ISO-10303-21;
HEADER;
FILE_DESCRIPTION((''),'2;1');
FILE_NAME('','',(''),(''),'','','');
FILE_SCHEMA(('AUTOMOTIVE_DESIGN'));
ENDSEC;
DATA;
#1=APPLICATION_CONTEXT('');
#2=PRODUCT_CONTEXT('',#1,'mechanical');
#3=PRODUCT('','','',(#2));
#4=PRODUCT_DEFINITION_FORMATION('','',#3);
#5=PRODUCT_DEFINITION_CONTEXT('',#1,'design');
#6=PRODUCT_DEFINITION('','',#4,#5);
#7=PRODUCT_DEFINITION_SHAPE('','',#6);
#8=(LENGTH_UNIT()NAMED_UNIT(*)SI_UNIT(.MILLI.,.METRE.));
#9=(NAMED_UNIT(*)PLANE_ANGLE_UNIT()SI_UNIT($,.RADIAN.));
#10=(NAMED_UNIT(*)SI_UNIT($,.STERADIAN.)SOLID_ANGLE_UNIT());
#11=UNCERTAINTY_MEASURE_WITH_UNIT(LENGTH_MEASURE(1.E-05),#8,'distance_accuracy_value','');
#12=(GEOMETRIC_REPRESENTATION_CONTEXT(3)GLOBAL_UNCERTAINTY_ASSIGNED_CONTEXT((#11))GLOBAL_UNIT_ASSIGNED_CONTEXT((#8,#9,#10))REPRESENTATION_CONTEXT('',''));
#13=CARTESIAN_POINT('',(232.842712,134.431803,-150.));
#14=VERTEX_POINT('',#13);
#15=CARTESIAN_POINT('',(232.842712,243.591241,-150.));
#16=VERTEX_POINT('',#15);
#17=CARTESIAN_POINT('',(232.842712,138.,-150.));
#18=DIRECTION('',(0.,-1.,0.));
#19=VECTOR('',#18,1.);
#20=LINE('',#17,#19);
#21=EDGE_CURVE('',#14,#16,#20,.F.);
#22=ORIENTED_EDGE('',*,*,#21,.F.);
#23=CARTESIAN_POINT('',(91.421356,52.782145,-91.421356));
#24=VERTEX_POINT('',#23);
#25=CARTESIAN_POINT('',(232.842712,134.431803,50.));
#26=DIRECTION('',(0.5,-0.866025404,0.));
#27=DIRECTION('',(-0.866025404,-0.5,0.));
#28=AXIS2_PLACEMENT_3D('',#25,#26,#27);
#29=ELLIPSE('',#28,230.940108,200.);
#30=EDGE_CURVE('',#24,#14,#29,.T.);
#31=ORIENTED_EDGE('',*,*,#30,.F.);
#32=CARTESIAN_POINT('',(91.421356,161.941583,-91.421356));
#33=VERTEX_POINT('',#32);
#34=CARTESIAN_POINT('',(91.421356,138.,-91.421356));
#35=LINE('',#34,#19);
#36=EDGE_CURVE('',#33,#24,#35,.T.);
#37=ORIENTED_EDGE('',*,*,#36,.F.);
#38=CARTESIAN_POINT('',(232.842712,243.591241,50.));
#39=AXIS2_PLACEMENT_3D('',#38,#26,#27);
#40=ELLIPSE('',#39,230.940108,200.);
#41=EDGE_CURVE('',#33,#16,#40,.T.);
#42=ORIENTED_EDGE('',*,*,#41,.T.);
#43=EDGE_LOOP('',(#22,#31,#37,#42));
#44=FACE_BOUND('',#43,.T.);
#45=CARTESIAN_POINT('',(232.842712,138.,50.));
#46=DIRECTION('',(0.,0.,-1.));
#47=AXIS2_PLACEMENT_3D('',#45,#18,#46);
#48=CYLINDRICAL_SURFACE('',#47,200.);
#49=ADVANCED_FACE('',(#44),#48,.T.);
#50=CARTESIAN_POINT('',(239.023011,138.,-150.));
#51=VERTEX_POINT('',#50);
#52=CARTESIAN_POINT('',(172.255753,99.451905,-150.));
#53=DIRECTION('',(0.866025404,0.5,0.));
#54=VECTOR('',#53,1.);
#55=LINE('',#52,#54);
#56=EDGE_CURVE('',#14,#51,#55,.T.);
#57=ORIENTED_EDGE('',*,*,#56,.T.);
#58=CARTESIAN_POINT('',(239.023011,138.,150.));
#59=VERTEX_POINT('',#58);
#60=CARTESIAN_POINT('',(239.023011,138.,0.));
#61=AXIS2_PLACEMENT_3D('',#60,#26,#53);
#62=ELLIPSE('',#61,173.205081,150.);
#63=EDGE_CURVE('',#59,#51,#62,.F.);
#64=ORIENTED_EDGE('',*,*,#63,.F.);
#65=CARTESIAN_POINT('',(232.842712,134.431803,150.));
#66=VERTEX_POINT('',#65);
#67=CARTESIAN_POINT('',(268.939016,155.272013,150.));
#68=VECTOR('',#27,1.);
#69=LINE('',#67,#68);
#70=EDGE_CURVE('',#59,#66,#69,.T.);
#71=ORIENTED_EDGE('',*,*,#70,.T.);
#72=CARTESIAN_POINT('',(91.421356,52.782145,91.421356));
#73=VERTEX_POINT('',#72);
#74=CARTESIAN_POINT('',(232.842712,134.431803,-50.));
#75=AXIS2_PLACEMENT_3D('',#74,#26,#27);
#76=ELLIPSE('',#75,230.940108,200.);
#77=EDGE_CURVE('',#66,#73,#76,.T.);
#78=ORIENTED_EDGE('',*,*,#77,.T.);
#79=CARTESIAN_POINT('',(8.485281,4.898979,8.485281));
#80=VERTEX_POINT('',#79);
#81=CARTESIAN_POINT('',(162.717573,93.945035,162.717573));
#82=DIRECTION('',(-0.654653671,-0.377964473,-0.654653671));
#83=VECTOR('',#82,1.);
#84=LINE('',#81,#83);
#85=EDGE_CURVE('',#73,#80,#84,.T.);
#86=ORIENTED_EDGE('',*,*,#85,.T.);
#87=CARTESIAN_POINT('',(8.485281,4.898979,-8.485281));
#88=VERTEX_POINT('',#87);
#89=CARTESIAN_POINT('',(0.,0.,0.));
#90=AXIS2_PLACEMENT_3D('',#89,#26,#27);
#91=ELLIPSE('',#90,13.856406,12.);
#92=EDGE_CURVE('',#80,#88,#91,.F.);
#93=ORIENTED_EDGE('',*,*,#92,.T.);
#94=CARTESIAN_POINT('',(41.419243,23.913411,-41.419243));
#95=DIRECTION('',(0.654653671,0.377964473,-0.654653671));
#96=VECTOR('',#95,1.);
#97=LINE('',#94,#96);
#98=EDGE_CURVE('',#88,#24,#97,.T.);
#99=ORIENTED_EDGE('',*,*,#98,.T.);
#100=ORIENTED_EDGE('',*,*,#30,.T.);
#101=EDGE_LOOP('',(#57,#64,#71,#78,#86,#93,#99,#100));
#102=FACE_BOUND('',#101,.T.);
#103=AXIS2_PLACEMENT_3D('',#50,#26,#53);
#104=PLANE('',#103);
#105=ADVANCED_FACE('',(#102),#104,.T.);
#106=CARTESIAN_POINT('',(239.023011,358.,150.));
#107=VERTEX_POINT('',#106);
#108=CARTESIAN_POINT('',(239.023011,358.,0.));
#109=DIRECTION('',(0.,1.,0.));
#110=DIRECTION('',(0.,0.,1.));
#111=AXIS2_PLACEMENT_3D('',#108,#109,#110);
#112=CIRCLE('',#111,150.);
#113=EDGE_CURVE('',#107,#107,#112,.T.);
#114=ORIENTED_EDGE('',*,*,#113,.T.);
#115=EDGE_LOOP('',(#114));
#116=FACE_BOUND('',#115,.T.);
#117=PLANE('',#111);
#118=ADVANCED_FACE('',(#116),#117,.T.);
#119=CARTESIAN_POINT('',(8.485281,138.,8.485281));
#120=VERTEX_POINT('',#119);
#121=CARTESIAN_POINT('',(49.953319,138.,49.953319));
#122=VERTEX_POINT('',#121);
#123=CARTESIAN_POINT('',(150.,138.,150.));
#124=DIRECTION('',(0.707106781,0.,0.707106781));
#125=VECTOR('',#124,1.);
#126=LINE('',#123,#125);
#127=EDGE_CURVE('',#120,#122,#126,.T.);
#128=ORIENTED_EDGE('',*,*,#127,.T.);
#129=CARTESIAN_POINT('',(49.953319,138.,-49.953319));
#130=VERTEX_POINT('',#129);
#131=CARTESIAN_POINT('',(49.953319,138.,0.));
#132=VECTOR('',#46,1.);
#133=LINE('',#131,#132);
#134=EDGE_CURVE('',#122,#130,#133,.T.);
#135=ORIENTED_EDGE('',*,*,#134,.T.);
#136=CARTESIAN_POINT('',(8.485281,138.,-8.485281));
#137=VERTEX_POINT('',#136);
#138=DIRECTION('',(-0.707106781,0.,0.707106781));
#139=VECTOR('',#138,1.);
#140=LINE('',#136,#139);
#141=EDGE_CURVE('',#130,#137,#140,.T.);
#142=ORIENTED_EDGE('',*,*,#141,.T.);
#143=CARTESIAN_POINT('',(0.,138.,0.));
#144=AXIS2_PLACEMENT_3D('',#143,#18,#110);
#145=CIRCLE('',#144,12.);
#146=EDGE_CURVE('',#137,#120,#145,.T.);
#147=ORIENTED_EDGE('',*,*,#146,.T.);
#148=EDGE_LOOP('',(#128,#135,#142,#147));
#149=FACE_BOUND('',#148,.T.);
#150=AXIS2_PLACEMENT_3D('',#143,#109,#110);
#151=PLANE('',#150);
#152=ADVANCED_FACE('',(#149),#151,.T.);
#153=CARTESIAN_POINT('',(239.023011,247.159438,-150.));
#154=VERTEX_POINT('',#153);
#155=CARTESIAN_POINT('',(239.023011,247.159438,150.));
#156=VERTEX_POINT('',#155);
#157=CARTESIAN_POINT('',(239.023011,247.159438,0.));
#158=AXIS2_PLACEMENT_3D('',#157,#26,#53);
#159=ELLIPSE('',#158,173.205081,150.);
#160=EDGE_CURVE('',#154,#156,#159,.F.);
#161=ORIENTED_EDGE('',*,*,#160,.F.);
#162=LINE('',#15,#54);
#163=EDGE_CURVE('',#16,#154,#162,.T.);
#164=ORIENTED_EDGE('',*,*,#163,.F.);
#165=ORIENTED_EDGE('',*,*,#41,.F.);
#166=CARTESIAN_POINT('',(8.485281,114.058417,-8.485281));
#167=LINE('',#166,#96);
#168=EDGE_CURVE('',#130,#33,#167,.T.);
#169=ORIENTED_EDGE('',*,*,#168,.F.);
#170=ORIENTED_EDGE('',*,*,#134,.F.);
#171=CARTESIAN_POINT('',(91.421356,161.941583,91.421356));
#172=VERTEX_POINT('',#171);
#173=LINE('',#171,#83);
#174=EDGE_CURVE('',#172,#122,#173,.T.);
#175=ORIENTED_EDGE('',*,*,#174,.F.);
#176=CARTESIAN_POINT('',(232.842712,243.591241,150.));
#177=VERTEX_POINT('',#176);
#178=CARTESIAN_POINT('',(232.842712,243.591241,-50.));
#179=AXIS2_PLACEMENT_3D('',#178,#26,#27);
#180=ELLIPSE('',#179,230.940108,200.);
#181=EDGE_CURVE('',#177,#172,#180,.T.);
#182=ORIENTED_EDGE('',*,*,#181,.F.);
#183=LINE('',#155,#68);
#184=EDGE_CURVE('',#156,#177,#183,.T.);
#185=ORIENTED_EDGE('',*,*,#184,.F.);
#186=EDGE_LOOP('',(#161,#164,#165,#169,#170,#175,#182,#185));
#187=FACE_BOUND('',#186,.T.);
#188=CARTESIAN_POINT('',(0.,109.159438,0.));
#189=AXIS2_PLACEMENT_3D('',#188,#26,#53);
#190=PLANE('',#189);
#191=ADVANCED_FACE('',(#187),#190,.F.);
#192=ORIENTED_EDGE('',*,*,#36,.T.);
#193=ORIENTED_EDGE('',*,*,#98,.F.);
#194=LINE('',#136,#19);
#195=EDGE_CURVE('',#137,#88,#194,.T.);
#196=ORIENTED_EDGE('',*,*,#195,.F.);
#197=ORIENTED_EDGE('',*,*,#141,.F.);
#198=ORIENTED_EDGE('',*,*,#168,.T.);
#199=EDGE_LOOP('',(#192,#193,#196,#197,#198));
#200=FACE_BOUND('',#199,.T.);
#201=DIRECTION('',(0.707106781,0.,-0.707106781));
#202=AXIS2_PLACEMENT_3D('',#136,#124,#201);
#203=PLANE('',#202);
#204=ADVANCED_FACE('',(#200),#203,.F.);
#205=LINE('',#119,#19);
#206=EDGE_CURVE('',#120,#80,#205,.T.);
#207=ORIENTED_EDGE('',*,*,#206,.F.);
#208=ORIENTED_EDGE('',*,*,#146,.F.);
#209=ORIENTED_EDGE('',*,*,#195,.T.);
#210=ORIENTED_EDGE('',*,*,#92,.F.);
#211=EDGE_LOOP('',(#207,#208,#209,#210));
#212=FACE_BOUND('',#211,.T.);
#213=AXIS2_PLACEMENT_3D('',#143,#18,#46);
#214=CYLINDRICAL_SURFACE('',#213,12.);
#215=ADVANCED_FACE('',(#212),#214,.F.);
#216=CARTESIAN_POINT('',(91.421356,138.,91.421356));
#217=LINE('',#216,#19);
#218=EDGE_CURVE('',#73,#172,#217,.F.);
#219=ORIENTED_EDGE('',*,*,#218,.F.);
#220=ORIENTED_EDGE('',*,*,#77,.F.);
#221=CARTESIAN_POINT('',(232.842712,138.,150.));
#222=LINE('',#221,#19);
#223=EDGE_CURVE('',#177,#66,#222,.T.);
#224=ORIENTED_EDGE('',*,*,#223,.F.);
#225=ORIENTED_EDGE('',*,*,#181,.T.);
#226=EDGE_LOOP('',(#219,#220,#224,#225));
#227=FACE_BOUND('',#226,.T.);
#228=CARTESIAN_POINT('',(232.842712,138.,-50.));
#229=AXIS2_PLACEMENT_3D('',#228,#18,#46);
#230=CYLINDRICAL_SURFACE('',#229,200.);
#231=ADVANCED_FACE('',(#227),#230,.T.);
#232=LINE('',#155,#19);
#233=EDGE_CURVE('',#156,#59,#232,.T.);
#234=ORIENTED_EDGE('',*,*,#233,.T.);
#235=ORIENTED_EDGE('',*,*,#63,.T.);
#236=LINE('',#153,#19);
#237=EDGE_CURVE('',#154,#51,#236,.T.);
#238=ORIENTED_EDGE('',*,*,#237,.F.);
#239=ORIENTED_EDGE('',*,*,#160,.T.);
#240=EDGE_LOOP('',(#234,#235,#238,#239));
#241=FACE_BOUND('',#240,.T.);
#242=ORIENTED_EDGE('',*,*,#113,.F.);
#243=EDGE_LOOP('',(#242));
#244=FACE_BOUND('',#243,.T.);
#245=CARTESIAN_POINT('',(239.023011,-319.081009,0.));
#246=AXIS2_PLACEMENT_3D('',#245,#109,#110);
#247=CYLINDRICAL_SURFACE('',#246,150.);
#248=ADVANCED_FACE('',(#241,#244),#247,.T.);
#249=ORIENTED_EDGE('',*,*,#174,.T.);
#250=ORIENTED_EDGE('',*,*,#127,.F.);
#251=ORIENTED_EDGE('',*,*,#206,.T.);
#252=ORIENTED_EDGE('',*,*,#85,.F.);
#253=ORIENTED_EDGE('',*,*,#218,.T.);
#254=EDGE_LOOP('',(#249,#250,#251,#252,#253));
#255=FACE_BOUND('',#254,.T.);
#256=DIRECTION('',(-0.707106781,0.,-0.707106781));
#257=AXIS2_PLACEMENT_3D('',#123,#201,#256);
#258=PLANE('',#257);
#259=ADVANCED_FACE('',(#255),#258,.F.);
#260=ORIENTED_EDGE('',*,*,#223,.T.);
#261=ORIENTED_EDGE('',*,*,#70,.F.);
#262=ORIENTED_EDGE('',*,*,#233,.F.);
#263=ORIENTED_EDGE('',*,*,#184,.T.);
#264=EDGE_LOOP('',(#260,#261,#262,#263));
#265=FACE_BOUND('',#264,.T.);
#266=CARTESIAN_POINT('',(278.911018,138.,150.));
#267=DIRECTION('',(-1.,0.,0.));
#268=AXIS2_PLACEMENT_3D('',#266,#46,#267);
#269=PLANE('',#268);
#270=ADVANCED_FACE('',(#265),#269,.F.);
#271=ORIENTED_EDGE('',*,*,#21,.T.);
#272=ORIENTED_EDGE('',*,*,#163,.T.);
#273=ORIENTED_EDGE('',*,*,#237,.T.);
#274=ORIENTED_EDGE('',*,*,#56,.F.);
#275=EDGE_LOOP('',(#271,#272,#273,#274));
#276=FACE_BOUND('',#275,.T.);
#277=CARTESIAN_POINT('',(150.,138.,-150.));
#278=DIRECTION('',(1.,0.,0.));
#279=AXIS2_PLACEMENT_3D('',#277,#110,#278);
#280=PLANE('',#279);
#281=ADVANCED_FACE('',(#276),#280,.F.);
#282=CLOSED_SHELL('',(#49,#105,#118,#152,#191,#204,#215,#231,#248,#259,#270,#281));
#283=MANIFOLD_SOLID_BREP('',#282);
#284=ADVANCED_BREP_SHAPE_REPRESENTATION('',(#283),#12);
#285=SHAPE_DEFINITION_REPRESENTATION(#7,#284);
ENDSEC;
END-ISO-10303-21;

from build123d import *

# Parameters (mm, degrees)
BOSS_EXTRUDE1_DEPTH             = 138
SKETCH10_R                      = 150
BOSS_EXTRUDE6_DEPTH             = 220
BOSS_EXTRUDE6_DIRECTION_2_REACH = 314.006
SPLIT3_DEPTH                    = 76
FILLET2_R                       = 200
BOSS_EXTRUDE7_DEPTH             = 109.159437572


with BuildPart() as part:
    # Sketch1 → Boss-Extrude1 (new body)
    with BuildSketch(Plane(origin=(0, 0, 0), x_dir=(1, 0, 0), z_dir=(0, 1, 0))):
        with BuildLine():
            Line((8.485281374, 8.485281374), (150, 150))
            Line((150, 150), (278.911017507, 150))
            Line((278.911017507, 150), (278.911017507, -150))
            Line((278.911017507, -150), (150, -150))
            Line((150, -150), (8.485281374, -8.485281374))
            ThreePointArc((8.485281374, -8.485281374), (12, 0), (8.485281374, 8.485281374))
        make_face()
    extrude(amount=BOSS_EXTRUDE1_DEPTH)

    # Split1
    split(bisect_by=Plane(origin=(0, 0, 0), x_dir=(-0.8660254037844416, -0.49999999999999495, 0), z_dir=(0.49999999999999495, -0.8660254037844416, 0)), keep=Keep.BOTTOM)

    # Sketch10 → Boss-Extrude6 (add)
    with BuildSketch(Plane(origin=(0, 138, 0), x_dir=(1, 0, 0), z_dir=(0, 1, 0))):
        with Locations(Location((239.023011445, 0, 0), (0, 0, 270))):
            Circle(SKETCH10_R)
    extrude(amount=BOSS_EXTRUDE6_DEPTH)

    # Boss-Extrude6 direction 2: up to this face of the body (flat: up to its plane)
    boss_extrude6_direction_2_end = Plane(part.part.faces().sort_by_distance((151.627791868, 87.542346451, 0))[0])
    # Sketch10 → Boss-Extrude6 direction 2 (add, up to the picked face)
    with BuildSketch(Plane(origin=(0, 138, 0), x_dir=(1, 0, 0), z_dir=(0, 1, 0)), mode=Mode.PRIVATE) as boss_extrude6_direction_2_sk1:
        with Locations(Location((239.023011445, 0, 0), (0, 0, 270))):
            Circle(SKETCH10_R)
    boss_extrude6_direction_2_tool1 = split(extrude(boss_extrude6_direction_2_sk1.sketch, amount=-BOSS_EXTRUDE6_DIRECTION_2_REACH, mode=Mode.PRIVATE), bisect_by=boss_extrude6_direction_2_end, keep=Keep.BOTH, mode=Mode.PRIVATE)
    add(boss_extrude6_direction_2_tool1.solids().sort_by(Axis((239.023011, 138, 0), (0, -1, 0)))[0])

    # Split3: read off the stored shape, not the designer's step
    # Split3 outline → Split3 (cut)
    with BuildSketch(Plane(origin=(0, 0, 0), x_dir=(0.8660254037844416, 0.4999999999999948, 0), z_dir=(0.4999999999999948, -0.8660254037844417, 0))):
        with BuildLine():
            Line((173.205080757, -150), (276, -150))
            add(Edge.make_bspline(
                [(276, -150), (449.205080757, -150), (449.205080757, 0), (449.205080757, 150), (276, 150)],
                knots=[4.71238898, 4.71238898, 4.71238898, 6.283185307, 6.283185307, 7.853981634, 7.853981634, 7.853981634], degree=2, weights=[1, 0.707106781, 1, 0.707106781, 1]))
            Line((276, 150), (173.205080757, 150))
            Line((173.205080757, 150), (9.797958971, 8.485281374))
            add(Edge.make_bspline(
                [(9.797958971, -8.485281374), (19.595917942, 0), (9.797958971, 8.485281374)],
                knots=[2.35619449, 2.35619449, 2.35619449, 3.926990817, 3.926990817, 3.926990817], degree=2, weights=[1, 0.707106781, 1]))
            Line((9.797958971, -8.485281374), (173.205080757, -150))
        make_face()
    extrude(amount=SPLIT3_DEPTH, mode=Mode.SUBTRACT)

    # Fillet2
    fillet2_edges = [part.edges().sort_by_distance(p)[0] for p in [
        (150, 112.301270189, -150),
        (150, 112.301270189, 150),
    ]]
    fillet(fillet2_edges, radius=FILLET2_R)

    # Sketch12 → Boss-Extrude7 (add, along a direction that is not the sketch's normal)
    with BuildSketch(Plane(origin=(0, 0, 0), x_dir=(0.8660254037844417, 0.49999999999999495, 0), z_dir=(0.49999999999999495, -0.8660254037844417, 0))):
        with BuildLine():
            Line((9.797958971, -8.485281374), (105.564289267, -91.421356237))
            add(Edge.make_bspline(
                [(105.564289267, -91.421356237), (173.205080757, -150), (268.863605452, -150)],
                knots=[0.785398163, 0.785398163, 0.785398163, 1.570796327, 1.570796327, 1.570796327], degree=2, weights=[1, 0.923879533, 1]))
            Line((268.863605452, -150), (276, -150))
            add(Edge.make_bspline(
                [(276, -150), (449.205080757, -150), (449.205080757, 0), (449.205080757, 150), (276, 150)],
                knots=[4.71238898, 4.71238898, 4.71238898, 6.283185307, 6.283185307, 7.853981634, 7.853981634, 7.853981634], degree=2, weights=[1, 0.707106781, 1, 0.707106781, 1]))
            Line((276, 150), (268.863605452, 150))
            add(Edge.make_bspline(
                [(268.863605452, 150), (173.205080757, 150), (105.564289267, 91.421356237)],
                knots=[4.71238898, 4.71238898, 4.71238898, 5.497787144, 5.497787144, 5.497787144], degree=2, weights=[1, 0.923879533, 1]))
            Line((105.564289267, 91.421356237), (9.797958971, 8.485281374))
            add(Edge.make_bspline(
                [(9.797958971, -8.485281374), (19.595917942, 0), (9.797958971, 8.485281374)],
                knots=[2.35619449, 2.35619449, 2.35619449, 3.926990817, 3.926990817, 3.926990817], degree=2, weights=[1, 0.707106781, 1]))
        make_face()
    extrude(amount=-BOSS_EXTRUDE7_DEPTH, dir=(0, -1, 0))


solid = part.part
